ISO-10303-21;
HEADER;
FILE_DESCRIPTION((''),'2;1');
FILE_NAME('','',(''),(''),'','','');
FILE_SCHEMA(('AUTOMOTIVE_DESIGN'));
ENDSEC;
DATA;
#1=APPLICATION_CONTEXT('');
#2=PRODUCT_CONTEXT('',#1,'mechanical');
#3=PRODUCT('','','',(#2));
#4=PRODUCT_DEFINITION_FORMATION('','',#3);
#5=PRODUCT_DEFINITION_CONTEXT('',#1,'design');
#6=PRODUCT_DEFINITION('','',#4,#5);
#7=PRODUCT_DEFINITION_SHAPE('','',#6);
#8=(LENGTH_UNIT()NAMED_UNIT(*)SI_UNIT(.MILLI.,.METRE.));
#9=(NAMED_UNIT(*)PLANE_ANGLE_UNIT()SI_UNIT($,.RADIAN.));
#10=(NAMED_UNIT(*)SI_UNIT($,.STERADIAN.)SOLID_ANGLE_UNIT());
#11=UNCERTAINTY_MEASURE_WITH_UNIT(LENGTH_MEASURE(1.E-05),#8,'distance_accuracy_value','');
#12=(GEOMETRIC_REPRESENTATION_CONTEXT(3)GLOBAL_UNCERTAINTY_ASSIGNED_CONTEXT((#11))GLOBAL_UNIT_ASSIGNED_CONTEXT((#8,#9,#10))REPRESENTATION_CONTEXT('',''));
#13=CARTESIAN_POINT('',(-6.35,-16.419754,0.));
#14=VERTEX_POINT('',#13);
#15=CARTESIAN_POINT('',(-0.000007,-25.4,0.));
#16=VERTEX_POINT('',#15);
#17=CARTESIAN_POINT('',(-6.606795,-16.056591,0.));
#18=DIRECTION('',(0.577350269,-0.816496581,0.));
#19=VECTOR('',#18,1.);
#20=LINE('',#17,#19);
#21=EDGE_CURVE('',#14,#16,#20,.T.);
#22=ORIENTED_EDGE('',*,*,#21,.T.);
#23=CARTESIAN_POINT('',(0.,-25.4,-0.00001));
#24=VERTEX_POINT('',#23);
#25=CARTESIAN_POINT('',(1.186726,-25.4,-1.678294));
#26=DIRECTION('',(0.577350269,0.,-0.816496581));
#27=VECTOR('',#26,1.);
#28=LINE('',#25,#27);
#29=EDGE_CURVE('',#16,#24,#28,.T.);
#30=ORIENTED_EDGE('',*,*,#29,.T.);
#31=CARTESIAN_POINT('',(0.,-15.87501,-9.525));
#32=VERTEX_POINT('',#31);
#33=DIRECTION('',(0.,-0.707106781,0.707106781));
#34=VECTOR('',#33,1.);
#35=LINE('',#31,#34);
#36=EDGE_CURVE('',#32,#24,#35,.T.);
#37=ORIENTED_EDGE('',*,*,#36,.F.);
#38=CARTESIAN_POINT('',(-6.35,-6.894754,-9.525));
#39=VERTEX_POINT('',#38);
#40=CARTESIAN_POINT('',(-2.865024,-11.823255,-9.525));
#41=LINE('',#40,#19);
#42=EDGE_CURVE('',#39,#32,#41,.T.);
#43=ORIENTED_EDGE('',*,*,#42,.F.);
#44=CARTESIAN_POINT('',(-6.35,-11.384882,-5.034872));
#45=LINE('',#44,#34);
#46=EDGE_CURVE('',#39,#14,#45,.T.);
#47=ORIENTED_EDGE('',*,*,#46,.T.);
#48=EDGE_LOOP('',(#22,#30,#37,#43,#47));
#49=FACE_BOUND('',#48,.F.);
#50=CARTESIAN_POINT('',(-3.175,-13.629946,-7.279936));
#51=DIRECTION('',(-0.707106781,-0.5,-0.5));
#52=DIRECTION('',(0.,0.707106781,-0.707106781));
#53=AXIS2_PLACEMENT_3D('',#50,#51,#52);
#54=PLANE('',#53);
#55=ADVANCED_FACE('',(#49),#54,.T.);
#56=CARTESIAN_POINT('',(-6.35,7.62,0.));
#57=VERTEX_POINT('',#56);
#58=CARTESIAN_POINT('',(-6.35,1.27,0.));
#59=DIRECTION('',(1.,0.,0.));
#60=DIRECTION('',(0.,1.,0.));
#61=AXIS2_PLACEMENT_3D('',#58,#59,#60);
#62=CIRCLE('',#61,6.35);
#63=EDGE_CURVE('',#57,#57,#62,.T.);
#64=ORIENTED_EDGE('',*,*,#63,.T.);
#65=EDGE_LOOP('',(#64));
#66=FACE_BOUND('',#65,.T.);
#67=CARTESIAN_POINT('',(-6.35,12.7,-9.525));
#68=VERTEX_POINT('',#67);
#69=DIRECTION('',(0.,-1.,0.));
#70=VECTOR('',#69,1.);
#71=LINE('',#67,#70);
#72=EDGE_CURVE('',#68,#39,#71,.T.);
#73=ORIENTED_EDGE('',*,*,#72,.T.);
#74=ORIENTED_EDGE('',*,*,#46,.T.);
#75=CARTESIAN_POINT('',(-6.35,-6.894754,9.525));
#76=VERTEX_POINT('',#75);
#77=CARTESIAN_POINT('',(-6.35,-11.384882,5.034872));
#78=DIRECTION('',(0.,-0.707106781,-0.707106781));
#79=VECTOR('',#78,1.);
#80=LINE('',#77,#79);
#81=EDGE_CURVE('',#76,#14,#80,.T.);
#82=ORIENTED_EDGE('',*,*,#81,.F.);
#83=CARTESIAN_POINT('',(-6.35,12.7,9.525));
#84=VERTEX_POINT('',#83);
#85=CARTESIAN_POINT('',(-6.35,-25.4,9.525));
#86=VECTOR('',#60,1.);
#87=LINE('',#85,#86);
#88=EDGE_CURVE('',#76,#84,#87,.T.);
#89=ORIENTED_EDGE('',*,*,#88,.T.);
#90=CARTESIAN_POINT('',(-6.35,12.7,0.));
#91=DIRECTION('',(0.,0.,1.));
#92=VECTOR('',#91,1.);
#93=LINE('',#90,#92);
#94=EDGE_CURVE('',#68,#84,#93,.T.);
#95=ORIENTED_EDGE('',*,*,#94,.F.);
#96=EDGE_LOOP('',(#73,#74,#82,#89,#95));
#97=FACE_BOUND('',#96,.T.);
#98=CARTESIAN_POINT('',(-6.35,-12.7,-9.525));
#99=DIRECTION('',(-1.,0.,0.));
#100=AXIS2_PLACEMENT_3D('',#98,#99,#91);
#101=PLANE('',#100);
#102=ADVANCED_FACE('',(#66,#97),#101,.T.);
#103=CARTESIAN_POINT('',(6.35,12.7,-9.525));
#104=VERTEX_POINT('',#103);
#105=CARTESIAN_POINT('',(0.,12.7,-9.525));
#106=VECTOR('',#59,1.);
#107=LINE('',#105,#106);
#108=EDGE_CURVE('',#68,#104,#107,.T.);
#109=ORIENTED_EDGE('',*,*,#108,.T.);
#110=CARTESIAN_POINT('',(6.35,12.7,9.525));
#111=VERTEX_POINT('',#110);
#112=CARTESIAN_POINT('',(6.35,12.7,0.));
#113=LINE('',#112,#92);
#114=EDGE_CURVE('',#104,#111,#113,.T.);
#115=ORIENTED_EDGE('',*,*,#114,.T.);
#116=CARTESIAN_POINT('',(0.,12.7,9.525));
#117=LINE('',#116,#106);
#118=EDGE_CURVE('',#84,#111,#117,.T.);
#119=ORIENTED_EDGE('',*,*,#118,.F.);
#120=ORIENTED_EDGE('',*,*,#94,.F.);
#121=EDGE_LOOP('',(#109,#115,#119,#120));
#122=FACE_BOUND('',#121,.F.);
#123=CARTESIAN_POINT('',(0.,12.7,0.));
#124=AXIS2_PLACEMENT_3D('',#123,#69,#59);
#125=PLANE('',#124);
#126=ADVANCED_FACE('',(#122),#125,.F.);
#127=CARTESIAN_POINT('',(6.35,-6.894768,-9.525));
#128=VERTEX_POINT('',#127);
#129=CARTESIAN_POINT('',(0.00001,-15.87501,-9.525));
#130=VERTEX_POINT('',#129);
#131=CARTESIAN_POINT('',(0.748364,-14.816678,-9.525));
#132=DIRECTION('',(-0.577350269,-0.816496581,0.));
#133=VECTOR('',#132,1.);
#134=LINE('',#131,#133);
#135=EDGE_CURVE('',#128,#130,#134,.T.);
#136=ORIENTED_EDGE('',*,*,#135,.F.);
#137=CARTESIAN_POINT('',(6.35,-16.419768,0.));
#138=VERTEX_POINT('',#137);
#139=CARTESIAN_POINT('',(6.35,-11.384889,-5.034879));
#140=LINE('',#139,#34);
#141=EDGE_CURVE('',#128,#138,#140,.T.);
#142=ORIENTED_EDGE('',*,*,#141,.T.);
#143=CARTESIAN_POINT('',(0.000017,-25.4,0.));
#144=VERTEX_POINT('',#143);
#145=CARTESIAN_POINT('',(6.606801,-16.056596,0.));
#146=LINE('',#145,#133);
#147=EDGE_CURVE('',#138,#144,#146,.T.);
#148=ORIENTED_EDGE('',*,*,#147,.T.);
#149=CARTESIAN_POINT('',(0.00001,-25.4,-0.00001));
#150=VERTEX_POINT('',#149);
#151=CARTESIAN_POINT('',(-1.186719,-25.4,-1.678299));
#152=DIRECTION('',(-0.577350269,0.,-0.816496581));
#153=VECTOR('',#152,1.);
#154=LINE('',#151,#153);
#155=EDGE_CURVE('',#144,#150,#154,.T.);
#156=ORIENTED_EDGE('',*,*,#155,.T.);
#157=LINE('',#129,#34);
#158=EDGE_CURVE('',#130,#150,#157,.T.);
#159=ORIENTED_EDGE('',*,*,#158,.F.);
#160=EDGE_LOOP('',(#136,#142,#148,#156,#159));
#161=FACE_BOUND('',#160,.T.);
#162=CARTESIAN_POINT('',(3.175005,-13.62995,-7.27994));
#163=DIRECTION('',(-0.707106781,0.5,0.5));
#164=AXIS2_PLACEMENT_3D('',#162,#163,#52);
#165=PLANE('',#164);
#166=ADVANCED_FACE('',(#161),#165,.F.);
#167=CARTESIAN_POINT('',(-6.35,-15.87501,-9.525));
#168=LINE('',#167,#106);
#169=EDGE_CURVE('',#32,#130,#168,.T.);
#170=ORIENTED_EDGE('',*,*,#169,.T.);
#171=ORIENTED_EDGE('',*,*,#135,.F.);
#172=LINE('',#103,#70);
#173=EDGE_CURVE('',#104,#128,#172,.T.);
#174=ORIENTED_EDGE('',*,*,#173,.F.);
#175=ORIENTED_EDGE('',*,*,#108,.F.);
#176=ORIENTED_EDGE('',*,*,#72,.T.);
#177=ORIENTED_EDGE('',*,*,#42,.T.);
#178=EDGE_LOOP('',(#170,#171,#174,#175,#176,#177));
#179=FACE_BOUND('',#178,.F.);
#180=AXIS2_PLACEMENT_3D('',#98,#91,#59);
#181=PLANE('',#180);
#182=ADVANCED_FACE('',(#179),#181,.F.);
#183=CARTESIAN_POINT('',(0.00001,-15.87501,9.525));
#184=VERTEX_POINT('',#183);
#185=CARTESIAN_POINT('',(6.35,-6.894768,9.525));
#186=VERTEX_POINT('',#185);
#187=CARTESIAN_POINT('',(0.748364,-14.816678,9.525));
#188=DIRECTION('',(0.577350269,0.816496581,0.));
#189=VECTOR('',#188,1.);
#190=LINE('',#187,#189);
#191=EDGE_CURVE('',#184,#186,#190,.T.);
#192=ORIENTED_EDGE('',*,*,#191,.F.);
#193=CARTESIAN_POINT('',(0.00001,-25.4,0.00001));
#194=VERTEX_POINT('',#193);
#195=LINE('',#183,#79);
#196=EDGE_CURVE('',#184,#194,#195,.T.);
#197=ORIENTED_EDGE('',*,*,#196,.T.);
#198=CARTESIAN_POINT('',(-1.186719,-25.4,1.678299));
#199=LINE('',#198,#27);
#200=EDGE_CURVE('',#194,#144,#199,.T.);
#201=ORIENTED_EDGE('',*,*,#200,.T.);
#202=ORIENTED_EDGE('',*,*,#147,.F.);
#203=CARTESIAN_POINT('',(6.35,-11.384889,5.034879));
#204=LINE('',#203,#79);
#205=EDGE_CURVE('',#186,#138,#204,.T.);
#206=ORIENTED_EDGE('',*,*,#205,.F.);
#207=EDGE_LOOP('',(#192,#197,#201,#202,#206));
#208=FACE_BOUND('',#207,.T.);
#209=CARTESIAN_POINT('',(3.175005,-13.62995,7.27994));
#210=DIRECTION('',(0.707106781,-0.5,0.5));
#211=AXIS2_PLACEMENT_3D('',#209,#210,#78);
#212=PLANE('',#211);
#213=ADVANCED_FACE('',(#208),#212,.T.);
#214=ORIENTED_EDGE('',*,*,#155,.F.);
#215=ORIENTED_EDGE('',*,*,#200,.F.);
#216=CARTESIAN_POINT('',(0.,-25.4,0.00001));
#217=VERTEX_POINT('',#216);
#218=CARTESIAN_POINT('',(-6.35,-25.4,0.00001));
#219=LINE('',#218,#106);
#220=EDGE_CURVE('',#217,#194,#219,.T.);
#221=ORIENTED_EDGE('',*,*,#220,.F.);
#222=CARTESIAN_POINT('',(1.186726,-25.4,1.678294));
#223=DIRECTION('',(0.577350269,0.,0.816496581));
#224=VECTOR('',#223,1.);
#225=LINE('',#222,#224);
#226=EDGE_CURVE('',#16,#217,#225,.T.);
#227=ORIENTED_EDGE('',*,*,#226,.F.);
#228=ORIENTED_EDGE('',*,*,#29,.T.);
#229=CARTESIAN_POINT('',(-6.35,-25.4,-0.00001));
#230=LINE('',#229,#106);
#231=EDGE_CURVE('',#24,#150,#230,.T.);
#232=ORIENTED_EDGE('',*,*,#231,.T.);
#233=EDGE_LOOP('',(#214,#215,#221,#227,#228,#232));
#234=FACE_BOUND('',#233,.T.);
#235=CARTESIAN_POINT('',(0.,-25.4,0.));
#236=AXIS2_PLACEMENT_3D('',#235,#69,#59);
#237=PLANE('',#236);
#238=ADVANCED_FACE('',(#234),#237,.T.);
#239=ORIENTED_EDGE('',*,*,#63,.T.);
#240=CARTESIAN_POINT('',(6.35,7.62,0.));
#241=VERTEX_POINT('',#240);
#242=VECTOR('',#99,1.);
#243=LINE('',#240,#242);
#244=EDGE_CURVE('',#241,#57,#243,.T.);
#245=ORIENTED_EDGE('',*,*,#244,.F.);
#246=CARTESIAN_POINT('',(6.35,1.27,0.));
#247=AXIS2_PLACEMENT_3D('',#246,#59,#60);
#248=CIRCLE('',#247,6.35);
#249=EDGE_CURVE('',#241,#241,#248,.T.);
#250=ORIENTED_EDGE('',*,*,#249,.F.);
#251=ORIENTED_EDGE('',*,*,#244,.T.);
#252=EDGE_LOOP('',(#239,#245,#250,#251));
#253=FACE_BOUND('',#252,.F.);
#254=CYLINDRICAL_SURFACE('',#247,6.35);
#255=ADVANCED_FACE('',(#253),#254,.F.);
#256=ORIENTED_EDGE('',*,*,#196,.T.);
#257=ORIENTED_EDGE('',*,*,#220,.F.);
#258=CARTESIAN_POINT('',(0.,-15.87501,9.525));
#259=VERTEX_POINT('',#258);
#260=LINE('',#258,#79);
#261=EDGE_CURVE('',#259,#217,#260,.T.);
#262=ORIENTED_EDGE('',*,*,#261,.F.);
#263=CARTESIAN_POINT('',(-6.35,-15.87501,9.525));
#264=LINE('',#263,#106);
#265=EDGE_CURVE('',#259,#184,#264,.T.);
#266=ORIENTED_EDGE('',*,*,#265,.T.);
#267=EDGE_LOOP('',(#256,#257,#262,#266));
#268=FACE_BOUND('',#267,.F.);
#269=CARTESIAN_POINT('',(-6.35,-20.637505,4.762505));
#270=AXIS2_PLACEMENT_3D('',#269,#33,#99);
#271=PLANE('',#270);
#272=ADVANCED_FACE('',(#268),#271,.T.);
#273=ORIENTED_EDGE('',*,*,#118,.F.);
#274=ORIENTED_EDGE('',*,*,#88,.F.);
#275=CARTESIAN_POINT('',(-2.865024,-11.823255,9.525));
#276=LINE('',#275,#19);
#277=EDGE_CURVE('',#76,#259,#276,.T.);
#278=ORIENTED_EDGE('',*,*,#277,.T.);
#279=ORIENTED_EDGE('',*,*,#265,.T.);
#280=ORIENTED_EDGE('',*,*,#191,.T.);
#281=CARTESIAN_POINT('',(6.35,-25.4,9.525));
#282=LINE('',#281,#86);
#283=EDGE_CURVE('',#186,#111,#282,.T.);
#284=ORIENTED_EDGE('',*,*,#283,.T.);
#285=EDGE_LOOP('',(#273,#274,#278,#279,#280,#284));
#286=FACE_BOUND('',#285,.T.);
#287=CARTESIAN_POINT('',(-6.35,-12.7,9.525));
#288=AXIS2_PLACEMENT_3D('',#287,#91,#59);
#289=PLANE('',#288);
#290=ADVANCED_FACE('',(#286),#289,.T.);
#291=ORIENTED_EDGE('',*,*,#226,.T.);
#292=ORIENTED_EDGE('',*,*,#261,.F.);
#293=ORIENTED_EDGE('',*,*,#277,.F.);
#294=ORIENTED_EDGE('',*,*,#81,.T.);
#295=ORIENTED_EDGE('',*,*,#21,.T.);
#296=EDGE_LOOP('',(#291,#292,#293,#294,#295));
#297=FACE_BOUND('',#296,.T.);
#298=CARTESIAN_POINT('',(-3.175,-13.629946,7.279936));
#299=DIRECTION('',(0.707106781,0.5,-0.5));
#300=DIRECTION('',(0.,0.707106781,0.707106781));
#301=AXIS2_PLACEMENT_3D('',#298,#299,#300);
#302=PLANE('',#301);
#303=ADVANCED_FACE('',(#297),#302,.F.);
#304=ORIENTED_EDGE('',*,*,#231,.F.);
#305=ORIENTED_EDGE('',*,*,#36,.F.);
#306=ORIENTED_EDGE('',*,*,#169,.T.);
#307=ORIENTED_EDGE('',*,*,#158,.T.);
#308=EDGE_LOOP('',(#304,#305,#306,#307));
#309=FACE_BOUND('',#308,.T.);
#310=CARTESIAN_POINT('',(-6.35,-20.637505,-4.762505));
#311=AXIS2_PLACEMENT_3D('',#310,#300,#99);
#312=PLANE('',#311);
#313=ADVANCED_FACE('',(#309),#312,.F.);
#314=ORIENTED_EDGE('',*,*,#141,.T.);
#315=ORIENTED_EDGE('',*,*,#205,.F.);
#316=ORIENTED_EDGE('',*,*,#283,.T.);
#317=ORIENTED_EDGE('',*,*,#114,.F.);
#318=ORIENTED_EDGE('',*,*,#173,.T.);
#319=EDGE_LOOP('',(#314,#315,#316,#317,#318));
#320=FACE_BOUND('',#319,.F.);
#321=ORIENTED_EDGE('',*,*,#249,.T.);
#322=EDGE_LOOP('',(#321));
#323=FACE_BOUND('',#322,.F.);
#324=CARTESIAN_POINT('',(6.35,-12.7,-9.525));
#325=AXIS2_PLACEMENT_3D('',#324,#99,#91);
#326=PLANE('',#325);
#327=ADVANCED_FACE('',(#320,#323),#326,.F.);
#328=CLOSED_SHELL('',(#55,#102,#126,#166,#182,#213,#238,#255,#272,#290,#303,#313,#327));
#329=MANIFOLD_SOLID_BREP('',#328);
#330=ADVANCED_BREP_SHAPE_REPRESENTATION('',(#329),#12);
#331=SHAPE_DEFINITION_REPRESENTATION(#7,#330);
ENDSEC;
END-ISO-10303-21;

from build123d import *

# Parameters (mm, degrees)
F0_W      = 12.7
F0_H      = 19.05
F1_DEPTH  = 12.7
F2_W      = 12.7
F2_H      = 19.05
F3_DEPTH  = 12.7
F4_SIZE   = 9.52499
F5_SIZE   = 6.35
F5_SIZE_2 = 6.34999
F6_R      = 6.35
F7_DEPTH  = 12.7


# Not quite as in the source:
# - a fillet or chamfer is up to 0.001 mm smaller than in the source, because OpenCascade refuses the exact size


with BuildPart() as f1:
    # F0 (on Front) → F1 (new body, symmetric)
    with BuildSketch(Plane.XZ):
        Rectangle(F0_W, F0_H)
    extrude(amount=F1_DEPTH, both=True)

    # F2 (on face) → F3 (join)
    with BuildSketch(Plane.XZ.offset(12.7)):
        Rectangle(F2_W, F2_H)
    extrude(amount=F3_DEPTH)

    # F4 (size 9.525 in the source; OpenCascade refuses exactly that, so slightly less here)
    f4_edges = [f1.edges().sort_by_distance(p)[0] for p in [
        (0, -25.4, 9.525),
        (0, -25.4, -9.525),
    ]]
    chamfer(f4_edges, length=F4_SIZE)

    # F5 (call 1 of 4: OpenCascade refuses the feature's edges together)
    f5_edges = [f1.edges().sort_by_distance(p)[0] for p in [
        (-6.35, -20.637505, 4.762505),
    ]]
    chamfer(f5_edges, length=F5_SIZE)

    # F5#2 (call 2 of 4)
    f5_2_edges = [f1.edges().sort_by_distance(p)[0] for p in [
        (-6.35, -20.637505, -4.762505),
    ]]
    chamfer(f5_2_edges, length=F5_SIZE)

    # F5#3 (call 3 of 4) (size 6.35 in the source; OpenCascade refuses exactly that, so slightly less here)
    f5_3_edges = [f1.edges().sort_by_distance(p)[0] for p in [
        (6.35, -20.637505, 4.762505),
    ]]
    chamfer(f5_3_edges, length=F5_SIZE_2)

    # F5#4 (call 4 of 4) (size 6.35 in the source; OpenCascade refuses exactly that, so slightly less here)
    f5_4_edges = [f1.edges().sort_by_distance(p)[0] for p in [
        (6.35, -20.637505, -4.762505),
    ]]
    chamfer(f5_4_edges, length=F5_SIZE_2)

    # F6 (on face) → F7 (cut)
    with BuildSketch(Plane.YZ.offset(6.35)):
        with Locations((1.27, 0)):
            Circle(F6_R)
    extrude(amount=-F7_DEPTH, mode=Mode.SUBTRACT)


solid = f1.part
